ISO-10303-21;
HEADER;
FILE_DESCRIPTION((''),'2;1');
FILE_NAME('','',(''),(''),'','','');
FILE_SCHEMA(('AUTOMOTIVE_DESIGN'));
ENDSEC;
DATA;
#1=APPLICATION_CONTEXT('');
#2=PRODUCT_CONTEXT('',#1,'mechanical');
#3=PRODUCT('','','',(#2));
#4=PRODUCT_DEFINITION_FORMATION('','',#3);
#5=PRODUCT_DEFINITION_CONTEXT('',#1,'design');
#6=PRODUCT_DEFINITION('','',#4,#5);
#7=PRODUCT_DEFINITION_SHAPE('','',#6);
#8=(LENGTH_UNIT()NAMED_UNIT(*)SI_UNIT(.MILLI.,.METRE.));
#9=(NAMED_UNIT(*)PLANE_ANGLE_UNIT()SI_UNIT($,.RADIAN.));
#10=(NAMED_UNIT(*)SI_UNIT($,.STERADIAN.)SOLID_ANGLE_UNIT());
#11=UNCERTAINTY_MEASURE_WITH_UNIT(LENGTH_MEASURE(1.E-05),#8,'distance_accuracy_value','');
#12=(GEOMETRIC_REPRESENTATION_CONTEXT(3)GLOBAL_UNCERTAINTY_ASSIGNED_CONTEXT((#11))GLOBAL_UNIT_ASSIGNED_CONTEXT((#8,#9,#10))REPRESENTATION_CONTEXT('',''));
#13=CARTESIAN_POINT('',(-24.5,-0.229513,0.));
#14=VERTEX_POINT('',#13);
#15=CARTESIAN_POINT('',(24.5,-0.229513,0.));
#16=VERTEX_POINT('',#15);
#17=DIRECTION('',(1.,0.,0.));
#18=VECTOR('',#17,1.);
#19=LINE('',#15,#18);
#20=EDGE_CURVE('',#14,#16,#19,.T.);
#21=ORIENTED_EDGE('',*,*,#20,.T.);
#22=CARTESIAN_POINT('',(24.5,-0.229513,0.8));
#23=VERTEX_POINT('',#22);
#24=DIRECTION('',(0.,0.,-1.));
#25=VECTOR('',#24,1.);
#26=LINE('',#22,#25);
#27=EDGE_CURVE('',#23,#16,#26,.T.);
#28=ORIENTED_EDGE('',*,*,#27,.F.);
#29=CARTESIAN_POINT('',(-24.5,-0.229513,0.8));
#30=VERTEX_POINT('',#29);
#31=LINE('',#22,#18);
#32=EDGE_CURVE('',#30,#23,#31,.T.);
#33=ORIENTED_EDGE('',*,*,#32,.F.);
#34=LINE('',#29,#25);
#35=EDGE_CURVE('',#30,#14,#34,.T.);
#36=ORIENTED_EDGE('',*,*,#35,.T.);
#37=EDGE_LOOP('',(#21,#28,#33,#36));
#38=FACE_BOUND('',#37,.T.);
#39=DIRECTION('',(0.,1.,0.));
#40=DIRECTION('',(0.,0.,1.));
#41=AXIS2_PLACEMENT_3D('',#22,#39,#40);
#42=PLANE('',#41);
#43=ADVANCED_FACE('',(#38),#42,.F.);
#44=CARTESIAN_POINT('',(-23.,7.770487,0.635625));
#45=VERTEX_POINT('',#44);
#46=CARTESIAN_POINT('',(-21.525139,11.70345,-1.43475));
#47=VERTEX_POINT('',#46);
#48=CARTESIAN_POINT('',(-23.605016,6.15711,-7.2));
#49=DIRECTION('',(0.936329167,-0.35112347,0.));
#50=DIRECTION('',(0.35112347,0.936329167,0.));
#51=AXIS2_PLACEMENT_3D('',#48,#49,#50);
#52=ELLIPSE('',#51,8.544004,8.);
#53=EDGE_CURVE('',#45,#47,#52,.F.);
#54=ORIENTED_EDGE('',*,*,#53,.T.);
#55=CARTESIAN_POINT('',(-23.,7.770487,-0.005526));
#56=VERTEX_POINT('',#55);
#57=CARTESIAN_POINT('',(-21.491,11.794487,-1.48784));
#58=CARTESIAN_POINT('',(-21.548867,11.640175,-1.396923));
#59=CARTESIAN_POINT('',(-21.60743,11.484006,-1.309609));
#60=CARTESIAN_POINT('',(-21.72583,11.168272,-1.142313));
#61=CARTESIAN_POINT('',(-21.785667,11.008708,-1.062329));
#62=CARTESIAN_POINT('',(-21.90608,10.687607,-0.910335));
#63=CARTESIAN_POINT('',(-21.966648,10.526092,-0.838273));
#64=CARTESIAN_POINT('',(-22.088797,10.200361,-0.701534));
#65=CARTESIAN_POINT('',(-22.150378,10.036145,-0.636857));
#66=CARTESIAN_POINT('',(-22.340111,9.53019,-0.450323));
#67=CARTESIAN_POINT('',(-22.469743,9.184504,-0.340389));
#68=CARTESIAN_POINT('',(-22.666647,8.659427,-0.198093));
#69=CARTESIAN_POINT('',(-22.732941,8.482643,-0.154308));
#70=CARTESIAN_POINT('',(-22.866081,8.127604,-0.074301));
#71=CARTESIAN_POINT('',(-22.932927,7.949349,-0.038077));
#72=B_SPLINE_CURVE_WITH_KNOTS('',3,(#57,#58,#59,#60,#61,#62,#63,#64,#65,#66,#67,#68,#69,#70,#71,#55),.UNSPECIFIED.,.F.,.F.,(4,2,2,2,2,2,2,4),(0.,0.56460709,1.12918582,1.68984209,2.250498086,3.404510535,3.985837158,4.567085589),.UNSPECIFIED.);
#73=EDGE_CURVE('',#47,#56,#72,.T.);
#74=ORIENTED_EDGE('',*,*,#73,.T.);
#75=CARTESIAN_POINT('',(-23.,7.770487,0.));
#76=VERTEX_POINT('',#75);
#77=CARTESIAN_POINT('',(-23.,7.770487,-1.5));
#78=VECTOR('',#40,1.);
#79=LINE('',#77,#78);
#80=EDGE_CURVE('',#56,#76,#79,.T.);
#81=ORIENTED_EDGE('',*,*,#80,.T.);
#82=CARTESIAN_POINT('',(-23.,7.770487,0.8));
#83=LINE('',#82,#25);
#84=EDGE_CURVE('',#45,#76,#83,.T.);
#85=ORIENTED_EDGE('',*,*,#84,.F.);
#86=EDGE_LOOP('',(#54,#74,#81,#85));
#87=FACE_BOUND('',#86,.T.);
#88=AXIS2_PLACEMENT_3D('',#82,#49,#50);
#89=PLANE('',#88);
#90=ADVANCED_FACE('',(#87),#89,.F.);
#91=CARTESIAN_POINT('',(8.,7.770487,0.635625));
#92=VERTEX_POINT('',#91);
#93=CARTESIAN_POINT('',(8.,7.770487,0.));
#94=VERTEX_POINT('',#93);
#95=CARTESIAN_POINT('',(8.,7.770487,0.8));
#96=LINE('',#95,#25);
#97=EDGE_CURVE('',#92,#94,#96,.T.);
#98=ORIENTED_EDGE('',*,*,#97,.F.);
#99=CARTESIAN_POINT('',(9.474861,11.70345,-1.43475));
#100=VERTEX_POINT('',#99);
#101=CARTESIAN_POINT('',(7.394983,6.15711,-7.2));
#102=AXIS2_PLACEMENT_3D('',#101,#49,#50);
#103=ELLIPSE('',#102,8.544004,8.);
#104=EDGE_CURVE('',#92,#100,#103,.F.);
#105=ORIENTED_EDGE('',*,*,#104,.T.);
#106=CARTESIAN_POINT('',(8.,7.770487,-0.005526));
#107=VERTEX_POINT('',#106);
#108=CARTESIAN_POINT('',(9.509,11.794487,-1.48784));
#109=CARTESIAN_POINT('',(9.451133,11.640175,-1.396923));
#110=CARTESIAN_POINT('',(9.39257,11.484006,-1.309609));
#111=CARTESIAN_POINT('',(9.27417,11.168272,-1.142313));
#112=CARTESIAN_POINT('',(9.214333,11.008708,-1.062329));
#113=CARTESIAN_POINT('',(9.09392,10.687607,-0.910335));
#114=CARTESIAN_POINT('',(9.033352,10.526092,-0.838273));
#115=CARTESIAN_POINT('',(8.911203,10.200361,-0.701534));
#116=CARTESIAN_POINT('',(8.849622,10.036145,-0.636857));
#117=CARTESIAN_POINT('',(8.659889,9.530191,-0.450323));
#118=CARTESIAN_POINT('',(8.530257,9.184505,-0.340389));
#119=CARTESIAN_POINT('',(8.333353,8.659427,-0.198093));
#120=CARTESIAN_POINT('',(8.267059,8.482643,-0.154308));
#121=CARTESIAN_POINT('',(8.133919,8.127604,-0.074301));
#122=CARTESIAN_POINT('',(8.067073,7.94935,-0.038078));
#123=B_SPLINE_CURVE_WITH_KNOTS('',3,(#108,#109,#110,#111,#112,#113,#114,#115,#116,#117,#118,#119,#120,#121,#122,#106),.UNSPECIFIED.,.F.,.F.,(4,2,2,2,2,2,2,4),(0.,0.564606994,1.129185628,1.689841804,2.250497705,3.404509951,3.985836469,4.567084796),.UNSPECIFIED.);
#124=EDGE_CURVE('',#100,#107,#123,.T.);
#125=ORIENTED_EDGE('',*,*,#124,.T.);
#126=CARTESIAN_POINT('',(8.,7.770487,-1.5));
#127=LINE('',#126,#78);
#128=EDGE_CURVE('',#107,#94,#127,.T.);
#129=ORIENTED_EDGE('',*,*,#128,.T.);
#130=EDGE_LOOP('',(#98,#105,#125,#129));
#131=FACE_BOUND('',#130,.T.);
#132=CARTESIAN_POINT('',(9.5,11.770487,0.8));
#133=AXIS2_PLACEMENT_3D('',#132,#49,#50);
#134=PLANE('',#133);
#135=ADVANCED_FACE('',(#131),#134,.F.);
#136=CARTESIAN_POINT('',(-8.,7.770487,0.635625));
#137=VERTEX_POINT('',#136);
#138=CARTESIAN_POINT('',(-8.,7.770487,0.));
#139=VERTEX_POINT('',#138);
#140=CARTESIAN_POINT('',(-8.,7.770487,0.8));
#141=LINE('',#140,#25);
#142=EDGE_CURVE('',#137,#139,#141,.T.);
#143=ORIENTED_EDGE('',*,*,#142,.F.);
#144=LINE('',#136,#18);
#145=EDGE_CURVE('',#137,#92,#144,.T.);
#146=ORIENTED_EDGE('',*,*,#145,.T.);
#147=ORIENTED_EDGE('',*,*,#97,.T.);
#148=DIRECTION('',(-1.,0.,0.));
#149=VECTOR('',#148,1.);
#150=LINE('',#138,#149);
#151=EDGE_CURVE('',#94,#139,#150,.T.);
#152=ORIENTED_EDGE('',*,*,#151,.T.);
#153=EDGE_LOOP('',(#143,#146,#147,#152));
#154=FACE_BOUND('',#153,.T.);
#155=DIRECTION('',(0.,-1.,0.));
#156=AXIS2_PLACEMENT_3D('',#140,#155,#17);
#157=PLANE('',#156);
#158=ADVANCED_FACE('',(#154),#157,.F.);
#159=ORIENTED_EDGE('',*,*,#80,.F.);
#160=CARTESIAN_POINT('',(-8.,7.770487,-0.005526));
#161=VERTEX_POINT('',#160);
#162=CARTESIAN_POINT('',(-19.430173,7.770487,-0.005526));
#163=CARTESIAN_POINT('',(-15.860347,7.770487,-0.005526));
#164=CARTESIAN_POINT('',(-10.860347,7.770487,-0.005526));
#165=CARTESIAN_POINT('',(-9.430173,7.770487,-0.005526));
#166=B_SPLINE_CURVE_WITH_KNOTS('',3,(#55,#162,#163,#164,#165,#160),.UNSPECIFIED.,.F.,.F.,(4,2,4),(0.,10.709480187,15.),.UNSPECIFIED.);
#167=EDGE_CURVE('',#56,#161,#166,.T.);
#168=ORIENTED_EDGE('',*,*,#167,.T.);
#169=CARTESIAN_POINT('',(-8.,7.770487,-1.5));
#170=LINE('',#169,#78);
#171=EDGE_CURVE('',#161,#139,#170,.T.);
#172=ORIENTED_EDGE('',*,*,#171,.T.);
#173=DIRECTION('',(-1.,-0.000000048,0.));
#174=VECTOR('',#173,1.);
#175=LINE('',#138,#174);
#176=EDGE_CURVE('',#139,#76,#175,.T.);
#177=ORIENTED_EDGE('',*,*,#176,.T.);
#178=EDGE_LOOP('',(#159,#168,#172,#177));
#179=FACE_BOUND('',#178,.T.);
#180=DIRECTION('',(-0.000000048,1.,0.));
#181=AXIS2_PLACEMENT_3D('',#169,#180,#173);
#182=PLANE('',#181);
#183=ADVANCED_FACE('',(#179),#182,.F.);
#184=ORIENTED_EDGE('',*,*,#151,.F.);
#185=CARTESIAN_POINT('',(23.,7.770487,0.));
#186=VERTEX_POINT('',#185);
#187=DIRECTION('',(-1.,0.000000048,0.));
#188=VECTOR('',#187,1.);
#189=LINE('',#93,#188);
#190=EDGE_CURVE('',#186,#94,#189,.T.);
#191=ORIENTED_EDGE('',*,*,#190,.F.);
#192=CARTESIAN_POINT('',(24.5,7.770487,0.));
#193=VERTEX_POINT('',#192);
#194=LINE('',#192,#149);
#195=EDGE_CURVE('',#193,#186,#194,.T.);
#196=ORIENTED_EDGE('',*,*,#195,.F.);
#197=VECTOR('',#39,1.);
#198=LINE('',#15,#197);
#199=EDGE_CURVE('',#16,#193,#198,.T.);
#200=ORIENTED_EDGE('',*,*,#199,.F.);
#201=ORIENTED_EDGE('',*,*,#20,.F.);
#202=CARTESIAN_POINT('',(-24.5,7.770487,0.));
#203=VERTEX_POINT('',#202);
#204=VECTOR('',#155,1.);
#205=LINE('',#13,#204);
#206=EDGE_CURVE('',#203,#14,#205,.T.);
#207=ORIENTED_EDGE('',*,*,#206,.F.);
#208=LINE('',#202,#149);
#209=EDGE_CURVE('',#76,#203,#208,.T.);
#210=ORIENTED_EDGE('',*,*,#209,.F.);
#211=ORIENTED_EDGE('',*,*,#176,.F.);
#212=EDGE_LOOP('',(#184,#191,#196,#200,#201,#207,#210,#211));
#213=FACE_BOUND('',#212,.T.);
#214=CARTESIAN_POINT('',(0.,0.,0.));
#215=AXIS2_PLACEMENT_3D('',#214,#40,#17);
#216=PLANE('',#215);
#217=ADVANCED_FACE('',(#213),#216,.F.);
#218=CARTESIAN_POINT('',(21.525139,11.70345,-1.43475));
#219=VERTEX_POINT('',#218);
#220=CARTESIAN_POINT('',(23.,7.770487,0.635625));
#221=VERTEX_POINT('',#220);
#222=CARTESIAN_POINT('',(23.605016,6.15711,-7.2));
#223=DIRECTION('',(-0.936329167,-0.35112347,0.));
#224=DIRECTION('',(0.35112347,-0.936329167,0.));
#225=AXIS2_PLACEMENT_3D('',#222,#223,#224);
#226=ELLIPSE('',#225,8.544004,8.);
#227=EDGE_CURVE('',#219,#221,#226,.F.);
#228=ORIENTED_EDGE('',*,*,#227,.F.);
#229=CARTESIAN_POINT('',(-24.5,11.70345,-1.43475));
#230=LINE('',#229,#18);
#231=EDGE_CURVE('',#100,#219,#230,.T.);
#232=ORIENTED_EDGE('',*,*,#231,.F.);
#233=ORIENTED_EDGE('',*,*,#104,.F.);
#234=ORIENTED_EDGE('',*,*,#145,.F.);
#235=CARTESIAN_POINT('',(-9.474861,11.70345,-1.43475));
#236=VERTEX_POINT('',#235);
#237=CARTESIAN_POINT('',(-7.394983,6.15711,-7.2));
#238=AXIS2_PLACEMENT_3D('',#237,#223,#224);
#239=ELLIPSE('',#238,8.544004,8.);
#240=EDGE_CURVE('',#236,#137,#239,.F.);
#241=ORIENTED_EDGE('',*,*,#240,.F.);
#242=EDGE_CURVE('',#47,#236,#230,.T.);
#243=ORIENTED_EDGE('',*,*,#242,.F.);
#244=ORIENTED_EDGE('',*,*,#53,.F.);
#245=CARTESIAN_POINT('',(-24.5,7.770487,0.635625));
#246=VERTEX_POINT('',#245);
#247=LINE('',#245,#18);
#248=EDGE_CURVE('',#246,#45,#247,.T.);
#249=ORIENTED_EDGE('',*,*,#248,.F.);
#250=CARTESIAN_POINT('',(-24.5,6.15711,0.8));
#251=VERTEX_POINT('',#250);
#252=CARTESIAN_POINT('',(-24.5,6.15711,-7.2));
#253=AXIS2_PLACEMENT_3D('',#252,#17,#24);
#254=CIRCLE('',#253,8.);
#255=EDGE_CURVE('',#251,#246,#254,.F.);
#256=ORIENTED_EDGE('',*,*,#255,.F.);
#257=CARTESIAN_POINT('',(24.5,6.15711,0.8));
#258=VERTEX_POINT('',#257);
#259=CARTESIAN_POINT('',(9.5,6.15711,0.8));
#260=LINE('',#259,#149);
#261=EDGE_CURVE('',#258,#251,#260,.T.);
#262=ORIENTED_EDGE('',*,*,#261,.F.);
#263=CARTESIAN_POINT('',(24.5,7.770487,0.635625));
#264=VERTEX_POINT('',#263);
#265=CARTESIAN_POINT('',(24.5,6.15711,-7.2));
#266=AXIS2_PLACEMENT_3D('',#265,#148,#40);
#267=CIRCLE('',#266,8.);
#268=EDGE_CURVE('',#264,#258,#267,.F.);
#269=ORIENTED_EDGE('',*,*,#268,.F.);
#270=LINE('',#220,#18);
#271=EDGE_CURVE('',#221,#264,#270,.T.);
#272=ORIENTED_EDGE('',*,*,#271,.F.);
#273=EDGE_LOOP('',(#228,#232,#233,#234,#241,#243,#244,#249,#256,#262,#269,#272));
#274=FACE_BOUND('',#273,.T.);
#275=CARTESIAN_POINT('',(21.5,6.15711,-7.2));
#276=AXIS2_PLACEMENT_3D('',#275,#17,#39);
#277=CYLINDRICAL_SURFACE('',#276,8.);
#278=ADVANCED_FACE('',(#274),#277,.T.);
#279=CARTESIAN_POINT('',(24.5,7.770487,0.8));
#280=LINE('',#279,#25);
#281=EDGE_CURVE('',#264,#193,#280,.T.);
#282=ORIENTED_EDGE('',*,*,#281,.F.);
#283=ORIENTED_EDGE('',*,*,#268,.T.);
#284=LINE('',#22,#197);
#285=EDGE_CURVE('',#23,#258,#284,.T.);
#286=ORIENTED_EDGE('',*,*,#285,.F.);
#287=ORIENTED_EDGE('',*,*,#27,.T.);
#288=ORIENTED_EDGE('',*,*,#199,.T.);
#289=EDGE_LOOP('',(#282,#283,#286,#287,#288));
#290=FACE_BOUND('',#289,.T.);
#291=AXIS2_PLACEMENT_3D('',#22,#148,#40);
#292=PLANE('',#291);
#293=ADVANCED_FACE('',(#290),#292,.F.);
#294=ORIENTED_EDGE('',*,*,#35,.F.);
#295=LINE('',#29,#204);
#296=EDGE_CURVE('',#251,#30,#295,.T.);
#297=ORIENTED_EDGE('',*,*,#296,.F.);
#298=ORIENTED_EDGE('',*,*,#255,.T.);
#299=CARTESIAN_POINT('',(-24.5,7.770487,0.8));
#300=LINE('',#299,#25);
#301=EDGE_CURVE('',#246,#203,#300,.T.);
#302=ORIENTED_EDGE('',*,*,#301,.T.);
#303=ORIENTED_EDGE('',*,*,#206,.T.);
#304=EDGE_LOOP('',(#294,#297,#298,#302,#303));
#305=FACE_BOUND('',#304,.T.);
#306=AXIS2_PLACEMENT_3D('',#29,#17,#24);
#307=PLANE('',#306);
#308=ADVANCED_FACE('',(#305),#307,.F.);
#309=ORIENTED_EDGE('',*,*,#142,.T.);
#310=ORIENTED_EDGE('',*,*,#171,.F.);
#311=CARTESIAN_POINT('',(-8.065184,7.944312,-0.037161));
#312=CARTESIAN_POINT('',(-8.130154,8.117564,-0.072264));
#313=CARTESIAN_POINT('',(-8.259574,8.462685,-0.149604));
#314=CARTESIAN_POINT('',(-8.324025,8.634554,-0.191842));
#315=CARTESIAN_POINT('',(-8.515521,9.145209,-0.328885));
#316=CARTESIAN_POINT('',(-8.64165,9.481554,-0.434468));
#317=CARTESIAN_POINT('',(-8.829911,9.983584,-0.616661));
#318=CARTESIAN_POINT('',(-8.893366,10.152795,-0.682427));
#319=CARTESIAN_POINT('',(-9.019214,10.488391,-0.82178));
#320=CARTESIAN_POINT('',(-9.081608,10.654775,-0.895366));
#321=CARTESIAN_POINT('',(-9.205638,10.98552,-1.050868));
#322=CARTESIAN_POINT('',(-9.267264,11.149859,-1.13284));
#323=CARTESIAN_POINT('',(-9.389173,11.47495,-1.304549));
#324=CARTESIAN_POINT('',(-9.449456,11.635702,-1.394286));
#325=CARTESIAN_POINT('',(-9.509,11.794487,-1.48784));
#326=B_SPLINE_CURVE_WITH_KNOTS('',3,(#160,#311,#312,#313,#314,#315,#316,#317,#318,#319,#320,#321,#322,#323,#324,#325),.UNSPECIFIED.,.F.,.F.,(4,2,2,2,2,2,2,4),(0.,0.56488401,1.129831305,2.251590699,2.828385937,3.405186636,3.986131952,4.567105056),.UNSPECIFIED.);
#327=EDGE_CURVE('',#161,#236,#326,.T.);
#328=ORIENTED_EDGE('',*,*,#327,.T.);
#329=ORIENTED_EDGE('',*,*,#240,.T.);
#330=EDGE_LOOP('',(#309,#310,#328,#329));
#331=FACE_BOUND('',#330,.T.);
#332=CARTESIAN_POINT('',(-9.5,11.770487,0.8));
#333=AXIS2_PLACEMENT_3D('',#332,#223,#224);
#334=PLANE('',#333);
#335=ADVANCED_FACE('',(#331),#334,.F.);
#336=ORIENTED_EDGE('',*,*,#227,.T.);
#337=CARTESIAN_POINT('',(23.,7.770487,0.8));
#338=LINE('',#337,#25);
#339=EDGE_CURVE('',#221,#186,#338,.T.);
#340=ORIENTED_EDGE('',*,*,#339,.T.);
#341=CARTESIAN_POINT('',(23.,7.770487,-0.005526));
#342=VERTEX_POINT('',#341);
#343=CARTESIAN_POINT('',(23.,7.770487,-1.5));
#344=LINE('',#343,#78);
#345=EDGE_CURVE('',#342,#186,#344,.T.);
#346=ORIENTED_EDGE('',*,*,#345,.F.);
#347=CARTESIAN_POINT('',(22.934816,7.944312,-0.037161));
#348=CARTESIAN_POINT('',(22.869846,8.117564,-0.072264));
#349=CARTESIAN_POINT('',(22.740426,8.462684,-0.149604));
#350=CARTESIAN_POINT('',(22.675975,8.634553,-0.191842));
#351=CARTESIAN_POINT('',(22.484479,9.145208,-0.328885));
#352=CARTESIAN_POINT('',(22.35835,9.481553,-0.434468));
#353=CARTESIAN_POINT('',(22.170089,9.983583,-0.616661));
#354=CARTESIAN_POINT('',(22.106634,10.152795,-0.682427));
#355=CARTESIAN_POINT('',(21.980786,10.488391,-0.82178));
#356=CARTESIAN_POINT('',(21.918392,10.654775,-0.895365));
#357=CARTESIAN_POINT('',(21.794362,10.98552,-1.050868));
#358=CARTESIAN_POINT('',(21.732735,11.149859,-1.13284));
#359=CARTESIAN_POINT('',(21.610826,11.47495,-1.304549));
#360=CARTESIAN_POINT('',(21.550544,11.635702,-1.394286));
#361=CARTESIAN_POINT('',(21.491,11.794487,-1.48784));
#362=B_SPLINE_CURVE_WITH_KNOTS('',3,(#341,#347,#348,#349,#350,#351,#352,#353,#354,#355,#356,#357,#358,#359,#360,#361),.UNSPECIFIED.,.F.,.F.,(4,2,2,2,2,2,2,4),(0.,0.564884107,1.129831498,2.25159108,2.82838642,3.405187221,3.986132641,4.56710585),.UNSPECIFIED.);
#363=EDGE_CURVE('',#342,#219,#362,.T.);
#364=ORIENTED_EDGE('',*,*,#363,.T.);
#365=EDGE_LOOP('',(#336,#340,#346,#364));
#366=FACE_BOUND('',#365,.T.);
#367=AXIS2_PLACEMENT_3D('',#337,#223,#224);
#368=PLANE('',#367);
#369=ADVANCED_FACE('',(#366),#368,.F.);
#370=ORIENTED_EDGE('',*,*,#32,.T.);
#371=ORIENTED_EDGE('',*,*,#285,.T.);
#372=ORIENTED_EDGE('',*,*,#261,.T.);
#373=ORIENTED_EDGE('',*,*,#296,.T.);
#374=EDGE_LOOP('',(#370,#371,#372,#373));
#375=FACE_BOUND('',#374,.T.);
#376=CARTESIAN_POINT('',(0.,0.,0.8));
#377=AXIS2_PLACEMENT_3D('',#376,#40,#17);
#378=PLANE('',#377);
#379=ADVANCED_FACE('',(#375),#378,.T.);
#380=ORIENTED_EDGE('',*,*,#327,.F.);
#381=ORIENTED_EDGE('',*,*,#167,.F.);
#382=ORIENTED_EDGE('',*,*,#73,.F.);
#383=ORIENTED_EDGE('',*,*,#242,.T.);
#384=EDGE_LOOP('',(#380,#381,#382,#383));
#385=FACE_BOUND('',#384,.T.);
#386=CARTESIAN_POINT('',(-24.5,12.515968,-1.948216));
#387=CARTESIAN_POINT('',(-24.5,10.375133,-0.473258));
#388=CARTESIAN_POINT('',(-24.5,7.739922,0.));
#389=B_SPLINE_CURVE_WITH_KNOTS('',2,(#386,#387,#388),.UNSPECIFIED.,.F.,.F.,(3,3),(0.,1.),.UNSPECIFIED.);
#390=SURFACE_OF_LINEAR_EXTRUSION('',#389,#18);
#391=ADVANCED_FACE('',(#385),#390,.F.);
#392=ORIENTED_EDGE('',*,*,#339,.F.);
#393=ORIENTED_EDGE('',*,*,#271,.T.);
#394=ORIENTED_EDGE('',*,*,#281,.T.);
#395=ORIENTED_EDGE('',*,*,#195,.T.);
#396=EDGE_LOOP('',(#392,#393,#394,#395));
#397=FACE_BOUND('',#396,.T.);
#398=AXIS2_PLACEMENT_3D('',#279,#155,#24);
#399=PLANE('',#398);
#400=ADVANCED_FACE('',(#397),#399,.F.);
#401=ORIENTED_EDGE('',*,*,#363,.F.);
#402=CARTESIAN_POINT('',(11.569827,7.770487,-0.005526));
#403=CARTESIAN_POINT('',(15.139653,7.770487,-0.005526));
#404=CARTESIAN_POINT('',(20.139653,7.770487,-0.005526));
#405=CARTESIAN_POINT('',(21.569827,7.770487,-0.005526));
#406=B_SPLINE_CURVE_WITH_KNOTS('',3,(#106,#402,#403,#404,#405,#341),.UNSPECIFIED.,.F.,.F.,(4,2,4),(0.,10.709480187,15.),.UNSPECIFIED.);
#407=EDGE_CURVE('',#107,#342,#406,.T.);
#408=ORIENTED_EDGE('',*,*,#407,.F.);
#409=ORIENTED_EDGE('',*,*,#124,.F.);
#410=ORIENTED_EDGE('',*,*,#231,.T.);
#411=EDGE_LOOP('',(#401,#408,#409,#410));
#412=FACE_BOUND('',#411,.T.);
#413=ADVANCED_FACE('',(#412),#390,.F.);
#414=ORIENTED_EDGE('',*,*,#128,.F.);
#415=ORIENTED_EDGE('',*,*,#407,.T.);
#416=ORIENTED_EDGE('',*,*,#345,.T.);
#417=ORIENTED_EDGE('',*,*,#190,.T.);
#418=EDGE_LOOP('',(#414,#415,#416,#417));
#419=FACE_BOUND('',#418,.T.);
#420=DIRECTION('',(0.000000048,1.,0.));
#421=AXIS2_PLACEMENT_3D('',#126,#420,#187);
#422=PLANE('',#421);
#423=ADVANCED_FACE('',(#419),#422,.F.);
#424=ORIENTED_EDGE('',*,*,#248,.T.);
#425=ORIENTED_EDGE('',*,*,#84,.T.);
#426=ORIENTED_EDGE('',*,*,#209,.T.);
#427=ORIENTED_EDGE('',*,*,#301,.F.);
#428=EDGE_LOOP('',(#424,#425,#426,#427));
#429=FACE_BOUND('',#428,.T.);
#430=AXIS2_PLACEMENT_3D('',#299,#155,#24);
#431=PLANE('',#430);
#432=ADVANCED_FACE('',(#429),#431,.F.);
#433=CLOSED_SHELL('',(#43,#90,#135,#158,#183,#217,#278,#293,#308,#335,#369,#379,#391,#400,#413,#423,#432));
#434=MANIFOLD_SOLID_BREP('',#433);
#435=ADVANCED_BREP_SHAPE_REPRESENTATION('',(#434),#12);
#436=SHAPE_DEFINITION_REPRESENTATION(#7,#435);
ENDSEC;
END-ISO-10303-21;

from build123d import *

# Parameters (mm, degrees)
P_IDAT_VYSUNUT_M2_DEPTH  = 0.8
P_IDAT_VYSUNUT_M3_DEPTH  = 1.5
ZAOBLIT1_R               = 8
ODEBRAT_VYSUNUT_M3_DEPTH = 51.416211215


with BuildPart() as part:
    # Skica1 → Přidat vysunutím2 (new body)
    with BuildSketch(Plane.XY):
        Polygon((24.5, -0.229513463), (-24.5, -0.229513463), (-24.5, 7.770486537), (-23, 7.770486537), (-21.499999864, 11.770486537), (-9.499999864, 11.770486537), (-8, 7.770487265), (8, 7.770487265), (9.499999864, 11.770486537), (21.499999864, 11.770486537), (23, 7.770486537), (24.5, 7.770486537), align=None)
    extrude(amount=P_IDAT_VYSUNUT_M2_DEPTH)

    # Skica2 → Přidat vysunutím3 (add)
    with BuildSketch(Plane(origin=(0, 0, 0), x_dir=(-1, 0, 0), z_dir=(0, 0, -1))):
        Polygon((-23, 7.770486537), (-21.499999864, 11.770486537), (-9.499999864, 11.770486537), (-8, 7.770487265), align=None)
        Polygon((8, 7.770487265), (23, 7.770486537), (21.499999864, 11.770486537), (9.499999864, 11.770486537), align=None)
    extrude(amount=P_IDAT_VYSUNUT_M3_DEPTH)

    # Zaoblit1
    # the kernel refuses this fillet: 8 mm, written as the material it takes off along each edge
    with BuildSketch(Plane(origin=(-4.533442337, 11.770486537, 0.8), x_dir=(0, -1, 0), z_dir=(1, 0, 0)), Plane(origin=(-35.533442064, 11.770486537, 0.8), x_dir=(0, -1, 0), z_dir=(1, 0, 0))) as zaoblit1_piece_1:
        with BuildLine():
            CenterArc((5.61337688, 8), ZAOBLIT1_R, 225.438687956, 44.561312044)
            Line((0, 2.3), (0, 0))
            Line((0, 0), (5.61337688, 0))
        make_face()
    extrude(amount=40.066884401, mode=Mode.SUBTRACT)

    # Skica7 → Odebrat vysunutím3 (cut, through all)
    with BuildSketch(Plane(origin=(24.5, 0, 0), x_dir=(0, 0, -1), z_dir=(1, 0, 0))):
        with BuildLine():
            Line((0, 7.739922094), (1.948215566, 7.739922094))
            Line((1.948215566, 7.739922094), (1.948215566, 12.51596757))
            add(Edge.make_bspline(
                [(0, 7.739922094), (0.473258475, 10.37513305), (1.948215566, 12.51596757)],
                knots=[0, 0, 0, 1, 1, 1], degree=2))
        make_face()
    extrude(amount=-ODEBRAT_VYSUNUT_M3_DEPTH, mode=Mode.SUBTRACT)


solid = part.part
